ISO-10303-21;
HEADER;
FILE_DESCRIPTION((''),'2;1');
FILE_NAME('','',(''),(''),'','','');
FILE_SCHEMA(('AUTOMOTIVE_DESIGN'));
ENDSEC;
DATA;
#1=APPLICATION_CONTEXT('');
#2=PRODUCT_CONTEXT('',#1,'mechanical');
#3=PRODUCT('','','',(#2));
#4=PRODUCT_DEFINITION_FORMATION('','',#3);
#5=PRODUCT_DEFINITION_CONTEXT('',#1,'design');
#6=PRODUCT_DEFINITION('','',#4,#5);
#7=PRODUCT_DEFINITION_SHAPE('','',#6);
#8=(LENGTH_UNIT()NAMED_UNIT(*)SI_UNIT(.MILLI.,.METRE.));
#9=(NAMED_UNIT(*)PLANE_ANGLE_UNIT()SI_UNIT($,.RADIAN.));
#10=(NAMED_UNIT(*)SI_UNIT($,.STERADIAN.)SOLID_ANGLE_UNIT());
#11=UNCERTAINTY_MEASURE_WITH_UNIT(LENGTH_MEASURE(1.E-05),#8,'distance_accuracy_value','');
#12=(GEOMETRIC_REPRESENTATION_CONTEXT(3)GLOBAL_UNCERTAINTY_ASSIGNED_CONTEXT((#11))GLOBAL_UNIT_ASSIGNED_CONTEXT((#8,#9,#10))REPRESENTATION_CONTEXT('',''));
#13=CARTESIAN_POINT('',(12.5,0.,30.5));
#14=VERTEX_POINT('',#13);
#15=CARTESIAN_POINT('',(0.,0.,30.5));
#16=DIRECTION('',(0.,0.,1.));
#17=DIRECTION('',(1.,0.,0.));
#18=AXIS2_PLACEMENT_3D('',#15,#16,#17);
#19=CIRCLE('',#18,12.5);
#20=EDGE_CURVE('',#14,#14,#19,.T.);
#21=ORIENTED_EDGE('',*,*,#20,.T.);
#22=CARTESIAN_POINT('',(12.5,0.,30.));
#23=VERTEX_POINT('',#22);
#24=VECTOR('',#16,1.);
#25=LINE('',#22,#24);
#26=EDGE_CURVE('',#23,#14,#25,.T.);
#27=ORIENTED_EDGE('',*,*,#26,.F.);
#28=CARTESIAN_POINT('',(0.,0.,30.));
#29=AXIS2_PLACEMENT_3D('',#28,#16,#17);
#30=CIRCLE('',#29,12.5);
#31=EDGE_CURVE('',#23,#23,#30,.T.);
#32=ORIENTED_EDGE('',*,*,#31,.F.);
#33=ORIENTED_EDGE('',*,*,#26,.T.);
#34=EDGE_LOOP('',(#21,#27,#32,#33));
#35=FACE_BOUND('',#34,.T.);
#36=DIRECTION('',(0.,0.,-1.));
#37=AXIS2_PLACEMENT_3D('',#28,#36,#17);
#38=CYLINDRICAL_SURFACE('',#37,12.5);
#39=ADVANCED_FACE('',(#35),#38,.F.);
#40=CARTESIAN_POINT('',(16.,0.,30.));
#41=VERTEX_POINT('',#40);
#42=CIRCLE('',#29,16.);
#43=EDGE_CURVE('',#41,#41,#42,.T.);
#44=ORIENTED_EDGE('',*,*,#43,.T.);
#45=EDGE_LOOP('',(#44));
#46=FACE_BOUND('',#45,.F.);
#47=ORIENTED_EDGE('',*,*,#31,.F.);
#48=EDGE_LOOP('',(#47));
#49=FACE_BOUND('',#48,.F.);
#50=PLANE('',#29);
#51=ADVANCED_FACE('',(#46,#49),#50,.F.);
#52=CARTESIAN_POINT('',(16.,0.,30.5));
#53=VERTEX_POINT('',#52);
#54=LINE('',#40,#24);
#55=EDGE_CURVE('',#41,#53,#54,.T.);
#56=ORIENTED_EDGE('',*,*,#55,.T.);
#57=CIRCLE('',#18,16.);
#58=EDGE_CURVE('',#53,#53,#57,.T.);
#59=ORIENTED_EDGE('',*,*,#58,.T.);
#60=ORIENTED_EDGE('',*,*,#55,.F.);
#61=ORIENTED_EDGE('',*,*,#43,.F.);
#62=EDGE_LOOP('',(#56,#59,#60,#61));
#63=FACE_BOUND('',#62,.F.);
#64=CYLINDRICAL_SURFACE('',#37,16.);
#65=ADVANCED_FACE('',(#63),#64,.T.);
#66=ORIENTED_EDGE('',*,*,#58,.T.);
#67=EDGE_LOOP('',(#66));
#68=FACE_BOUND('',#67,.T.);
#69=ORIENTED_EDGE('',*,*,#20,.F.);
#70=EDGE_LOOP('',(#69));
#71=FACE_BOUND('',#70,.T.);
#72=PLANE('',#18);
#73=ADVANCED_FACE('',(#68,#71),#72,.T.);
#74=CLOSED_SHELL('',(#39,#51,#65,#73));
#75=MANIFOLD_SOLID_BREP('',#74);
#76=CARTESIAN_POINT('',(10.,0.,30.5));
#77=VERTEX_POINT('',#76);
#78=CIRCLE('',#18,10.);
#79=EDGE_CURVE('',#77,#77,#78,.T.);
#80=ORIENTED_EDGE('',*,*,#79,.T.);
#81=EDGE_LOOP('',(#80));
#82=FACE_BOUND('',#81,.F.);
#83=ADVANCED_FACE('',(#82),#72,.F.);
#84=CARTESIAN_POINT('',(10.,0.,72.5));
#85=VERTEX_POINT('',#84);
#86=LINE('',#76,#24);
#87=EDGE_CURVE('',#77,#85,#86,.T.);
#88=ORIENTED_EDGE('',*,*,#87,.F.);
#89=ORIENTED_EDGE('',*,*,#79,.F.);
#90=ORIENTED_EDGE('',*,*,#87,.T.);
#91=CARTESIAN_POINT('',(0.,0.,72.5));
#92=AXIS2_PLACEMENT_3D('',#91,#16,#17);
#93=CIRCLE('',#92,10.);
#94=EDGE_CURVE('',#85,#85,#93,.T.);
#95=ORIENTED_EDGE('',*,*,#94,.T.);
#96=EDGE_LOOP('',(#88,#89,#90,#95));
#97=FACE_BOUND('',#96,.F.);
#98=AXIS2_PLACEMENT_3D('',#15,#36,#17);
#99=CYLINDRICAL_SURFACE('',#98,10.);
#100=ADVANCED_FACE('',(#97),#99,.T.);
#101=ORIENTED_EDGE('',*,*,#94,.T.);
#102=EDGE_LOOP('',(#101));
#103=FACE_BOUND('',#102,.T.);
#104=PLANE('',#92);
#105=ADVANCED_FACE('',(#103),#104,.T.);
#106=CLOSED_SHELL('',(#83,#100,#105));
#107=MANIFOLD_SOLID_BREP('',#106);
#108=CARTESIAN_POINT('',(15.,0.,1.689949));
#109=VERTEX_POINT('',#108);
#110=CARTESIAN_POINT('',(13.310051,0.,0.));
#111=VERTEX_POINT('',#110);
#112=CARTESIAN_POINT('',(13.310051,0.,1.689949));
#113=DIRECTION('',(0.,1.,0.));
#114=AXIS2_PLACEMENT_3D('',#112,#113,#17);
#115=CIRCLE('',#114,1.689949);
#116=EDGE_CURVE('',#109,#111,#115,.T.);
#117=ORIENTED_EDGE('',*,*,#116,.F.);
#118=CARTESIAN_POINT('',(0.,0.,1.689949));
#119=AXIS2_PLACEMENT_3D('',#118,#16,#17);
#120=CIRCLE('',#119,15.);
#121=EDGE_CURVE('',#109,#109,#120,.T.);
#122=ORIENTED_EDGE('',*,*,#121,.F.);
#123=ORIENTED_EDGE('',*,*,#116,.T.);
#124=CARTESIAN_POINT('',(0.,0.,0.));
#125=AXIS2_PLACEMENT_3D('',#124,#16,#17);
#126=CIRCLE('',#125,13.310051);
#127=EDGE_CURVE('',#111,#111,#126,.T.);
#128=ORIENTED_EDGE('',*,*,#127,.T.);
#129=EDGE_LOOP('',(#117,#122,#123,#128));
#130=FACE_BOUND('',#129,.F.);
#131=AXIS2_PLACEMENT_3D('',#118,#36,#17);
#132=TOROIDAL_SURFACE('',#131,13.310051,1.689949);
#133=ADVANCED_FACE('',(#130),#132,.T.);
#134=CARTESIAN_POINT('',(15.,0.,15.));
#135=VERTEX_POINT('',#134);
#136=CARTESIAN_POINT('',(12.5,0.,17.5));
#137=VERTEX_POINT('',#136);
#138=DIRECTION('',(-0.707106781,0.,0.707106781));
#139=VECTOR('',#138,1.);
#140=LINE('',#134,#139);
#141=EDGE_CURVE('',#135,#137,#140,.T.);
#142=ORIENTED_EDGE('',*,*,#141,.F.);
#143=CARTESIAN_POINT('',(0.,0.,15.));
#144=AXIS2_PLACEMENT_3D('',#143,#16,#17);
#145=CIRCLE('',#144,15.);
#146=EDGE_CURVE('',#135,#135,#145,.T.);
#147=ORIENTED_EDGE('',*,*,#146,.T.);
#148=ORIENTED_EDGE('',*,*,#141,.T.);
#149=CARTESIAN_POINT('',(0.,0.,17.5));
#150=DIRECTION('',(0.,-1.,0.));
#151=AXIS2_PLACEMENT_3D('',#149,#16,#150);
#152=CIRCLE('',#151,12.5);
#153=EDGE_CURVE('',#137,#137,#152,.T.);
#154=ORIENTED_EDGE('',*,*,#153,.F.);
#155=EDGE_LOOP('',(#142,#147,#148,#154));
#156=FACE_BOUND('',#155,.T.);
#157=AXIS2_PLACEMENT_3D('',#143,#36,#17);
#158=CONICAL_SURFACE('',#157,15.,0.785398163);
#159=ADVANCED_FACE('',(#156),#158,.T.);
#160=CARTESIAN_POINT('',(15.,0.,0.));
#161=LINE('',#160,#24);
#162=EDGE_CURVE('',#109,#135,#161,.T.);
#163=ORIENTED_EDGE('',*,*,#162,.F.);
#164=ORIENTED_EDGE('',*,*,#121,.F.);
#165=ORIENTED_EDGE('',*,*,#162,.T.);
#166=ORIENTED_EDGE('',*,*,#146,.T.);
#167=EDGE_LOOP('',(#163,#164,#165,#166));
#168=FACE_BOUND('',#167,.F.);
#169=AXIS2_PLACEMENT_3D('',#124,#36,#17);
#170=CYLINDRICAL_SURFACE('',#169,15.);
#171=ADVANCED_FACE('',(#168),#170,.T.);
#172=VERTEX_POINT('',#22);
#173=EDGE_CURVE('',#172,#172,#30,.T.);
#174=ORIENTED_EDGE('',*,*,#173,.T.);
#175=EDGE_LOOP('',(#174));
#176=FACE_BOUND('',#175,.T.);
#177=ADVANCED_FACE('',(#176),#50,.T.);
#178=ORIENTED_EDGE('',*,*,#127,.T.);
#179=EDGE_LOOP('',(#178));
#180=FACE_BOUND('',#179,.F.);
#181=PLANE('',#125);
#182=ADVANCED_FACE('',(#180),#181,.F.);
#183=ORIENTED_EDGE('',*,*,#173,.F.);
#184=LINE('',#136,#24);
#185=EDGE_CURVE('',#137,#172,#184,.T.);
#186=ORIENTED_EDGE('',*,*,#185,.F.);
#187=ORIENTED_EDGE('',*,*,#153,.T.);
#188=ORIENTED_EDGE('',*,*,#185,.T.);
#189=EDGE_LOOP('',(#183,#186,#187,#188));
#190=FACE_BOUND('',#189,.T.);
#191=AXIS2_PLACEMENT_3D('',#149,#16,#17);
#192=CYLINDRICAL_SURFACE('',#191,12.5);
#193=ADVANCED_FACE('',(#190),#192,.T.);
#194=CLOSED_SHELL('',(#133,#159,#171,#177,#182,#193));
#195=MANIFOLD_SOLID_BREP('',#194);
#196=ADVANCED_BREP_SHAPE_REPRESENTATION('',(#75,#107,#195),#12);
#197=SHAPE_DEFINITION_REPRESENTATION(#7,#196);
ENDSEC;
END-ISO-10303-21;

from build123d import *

# Parameters (mm, degrees)
F0_R        = 15
F1_DEPTH    = 20
F2_R        = 12.5
F3_DEPTH    = 10
F4_R        = 16
F4_R_2      = 12.5
F5_DEPTH    = 0.5
F6_R        = 10
F7_DEPTH    = 42
F8_R        = 1.6899494937
F9_S5_R     = 12.5
F9_T6_DEPTH = 23


# Not quite as in the source:
# - a fillet or chamfer that OpenCascade refuses, or shapes differently, is made with other operations: its cross-section is extruded or revolved along the edge and cut away or added


with BuildPart() as f1:
    # F0 (on Top) → F1 (new body)
    with BuildSketch(Plane.XY):
        Circle(F0_R)
    extrude(amount=F1_DEPTH)

    # F2 (on face) → F3 (join)
    with BuildSketch(Plane.XY.offset(20)):
        Circle(F2_R)
    extrude(amount=F3_DEPTH)

    # F8
    f8_edges = [f1.edges().sort_by_distance(p)[0] for p in [
        (-15, 0, 0),
    ]]
    fillet(f8_edges, radius=F8_R)

    # F9: chamfer of 5 on 1 edges, made by hand


with BuildPart() as f5:
    # F4 (on face) → F5 (new body)
    with BuildSketch(Plane.XY.offset(30)):
        Circle(F4_R)
        Circle(F4_R_2, mode=Mode.SUBTRACT)
    extrude(amount=F5_DEPTH)


with BuildPart() as f7:
    # F6 (on face) → F7 (new body)
    with BuildSketch(Plane.XY.offset(30.5)):
        Circle(F6_R)
    extrude(amount=F7_DEPTH)


with BuildPart() as f9_tool2:
    # F9_s3 → F9_t4 (revolve)
    with BuildSketch(Plane.XZ):
        Polygon((15, 15), (10, 20), (15, 20), align=None)
    revolve(axis=Axis((0, 0, 20), (0, 0, 1)))

    # F9_s5 → F9_t6 (cut, symmetric)
    with BuildSketch(Plane.XY.offset(17.5)):
        Circle(F9_S5_R)
    extrude(amount=F9_T6_DEPTH, both=True, mode=Mode.SUBTRACT)


with BuildPart() as f1_1:
    add(f1.part)

    # F9_t1: cut F9_tool2
    add(f9_tool2.part, mode=Mode.SUBTRACT)


solid = Compound([f5.part, f7.part, f1_1.part])
